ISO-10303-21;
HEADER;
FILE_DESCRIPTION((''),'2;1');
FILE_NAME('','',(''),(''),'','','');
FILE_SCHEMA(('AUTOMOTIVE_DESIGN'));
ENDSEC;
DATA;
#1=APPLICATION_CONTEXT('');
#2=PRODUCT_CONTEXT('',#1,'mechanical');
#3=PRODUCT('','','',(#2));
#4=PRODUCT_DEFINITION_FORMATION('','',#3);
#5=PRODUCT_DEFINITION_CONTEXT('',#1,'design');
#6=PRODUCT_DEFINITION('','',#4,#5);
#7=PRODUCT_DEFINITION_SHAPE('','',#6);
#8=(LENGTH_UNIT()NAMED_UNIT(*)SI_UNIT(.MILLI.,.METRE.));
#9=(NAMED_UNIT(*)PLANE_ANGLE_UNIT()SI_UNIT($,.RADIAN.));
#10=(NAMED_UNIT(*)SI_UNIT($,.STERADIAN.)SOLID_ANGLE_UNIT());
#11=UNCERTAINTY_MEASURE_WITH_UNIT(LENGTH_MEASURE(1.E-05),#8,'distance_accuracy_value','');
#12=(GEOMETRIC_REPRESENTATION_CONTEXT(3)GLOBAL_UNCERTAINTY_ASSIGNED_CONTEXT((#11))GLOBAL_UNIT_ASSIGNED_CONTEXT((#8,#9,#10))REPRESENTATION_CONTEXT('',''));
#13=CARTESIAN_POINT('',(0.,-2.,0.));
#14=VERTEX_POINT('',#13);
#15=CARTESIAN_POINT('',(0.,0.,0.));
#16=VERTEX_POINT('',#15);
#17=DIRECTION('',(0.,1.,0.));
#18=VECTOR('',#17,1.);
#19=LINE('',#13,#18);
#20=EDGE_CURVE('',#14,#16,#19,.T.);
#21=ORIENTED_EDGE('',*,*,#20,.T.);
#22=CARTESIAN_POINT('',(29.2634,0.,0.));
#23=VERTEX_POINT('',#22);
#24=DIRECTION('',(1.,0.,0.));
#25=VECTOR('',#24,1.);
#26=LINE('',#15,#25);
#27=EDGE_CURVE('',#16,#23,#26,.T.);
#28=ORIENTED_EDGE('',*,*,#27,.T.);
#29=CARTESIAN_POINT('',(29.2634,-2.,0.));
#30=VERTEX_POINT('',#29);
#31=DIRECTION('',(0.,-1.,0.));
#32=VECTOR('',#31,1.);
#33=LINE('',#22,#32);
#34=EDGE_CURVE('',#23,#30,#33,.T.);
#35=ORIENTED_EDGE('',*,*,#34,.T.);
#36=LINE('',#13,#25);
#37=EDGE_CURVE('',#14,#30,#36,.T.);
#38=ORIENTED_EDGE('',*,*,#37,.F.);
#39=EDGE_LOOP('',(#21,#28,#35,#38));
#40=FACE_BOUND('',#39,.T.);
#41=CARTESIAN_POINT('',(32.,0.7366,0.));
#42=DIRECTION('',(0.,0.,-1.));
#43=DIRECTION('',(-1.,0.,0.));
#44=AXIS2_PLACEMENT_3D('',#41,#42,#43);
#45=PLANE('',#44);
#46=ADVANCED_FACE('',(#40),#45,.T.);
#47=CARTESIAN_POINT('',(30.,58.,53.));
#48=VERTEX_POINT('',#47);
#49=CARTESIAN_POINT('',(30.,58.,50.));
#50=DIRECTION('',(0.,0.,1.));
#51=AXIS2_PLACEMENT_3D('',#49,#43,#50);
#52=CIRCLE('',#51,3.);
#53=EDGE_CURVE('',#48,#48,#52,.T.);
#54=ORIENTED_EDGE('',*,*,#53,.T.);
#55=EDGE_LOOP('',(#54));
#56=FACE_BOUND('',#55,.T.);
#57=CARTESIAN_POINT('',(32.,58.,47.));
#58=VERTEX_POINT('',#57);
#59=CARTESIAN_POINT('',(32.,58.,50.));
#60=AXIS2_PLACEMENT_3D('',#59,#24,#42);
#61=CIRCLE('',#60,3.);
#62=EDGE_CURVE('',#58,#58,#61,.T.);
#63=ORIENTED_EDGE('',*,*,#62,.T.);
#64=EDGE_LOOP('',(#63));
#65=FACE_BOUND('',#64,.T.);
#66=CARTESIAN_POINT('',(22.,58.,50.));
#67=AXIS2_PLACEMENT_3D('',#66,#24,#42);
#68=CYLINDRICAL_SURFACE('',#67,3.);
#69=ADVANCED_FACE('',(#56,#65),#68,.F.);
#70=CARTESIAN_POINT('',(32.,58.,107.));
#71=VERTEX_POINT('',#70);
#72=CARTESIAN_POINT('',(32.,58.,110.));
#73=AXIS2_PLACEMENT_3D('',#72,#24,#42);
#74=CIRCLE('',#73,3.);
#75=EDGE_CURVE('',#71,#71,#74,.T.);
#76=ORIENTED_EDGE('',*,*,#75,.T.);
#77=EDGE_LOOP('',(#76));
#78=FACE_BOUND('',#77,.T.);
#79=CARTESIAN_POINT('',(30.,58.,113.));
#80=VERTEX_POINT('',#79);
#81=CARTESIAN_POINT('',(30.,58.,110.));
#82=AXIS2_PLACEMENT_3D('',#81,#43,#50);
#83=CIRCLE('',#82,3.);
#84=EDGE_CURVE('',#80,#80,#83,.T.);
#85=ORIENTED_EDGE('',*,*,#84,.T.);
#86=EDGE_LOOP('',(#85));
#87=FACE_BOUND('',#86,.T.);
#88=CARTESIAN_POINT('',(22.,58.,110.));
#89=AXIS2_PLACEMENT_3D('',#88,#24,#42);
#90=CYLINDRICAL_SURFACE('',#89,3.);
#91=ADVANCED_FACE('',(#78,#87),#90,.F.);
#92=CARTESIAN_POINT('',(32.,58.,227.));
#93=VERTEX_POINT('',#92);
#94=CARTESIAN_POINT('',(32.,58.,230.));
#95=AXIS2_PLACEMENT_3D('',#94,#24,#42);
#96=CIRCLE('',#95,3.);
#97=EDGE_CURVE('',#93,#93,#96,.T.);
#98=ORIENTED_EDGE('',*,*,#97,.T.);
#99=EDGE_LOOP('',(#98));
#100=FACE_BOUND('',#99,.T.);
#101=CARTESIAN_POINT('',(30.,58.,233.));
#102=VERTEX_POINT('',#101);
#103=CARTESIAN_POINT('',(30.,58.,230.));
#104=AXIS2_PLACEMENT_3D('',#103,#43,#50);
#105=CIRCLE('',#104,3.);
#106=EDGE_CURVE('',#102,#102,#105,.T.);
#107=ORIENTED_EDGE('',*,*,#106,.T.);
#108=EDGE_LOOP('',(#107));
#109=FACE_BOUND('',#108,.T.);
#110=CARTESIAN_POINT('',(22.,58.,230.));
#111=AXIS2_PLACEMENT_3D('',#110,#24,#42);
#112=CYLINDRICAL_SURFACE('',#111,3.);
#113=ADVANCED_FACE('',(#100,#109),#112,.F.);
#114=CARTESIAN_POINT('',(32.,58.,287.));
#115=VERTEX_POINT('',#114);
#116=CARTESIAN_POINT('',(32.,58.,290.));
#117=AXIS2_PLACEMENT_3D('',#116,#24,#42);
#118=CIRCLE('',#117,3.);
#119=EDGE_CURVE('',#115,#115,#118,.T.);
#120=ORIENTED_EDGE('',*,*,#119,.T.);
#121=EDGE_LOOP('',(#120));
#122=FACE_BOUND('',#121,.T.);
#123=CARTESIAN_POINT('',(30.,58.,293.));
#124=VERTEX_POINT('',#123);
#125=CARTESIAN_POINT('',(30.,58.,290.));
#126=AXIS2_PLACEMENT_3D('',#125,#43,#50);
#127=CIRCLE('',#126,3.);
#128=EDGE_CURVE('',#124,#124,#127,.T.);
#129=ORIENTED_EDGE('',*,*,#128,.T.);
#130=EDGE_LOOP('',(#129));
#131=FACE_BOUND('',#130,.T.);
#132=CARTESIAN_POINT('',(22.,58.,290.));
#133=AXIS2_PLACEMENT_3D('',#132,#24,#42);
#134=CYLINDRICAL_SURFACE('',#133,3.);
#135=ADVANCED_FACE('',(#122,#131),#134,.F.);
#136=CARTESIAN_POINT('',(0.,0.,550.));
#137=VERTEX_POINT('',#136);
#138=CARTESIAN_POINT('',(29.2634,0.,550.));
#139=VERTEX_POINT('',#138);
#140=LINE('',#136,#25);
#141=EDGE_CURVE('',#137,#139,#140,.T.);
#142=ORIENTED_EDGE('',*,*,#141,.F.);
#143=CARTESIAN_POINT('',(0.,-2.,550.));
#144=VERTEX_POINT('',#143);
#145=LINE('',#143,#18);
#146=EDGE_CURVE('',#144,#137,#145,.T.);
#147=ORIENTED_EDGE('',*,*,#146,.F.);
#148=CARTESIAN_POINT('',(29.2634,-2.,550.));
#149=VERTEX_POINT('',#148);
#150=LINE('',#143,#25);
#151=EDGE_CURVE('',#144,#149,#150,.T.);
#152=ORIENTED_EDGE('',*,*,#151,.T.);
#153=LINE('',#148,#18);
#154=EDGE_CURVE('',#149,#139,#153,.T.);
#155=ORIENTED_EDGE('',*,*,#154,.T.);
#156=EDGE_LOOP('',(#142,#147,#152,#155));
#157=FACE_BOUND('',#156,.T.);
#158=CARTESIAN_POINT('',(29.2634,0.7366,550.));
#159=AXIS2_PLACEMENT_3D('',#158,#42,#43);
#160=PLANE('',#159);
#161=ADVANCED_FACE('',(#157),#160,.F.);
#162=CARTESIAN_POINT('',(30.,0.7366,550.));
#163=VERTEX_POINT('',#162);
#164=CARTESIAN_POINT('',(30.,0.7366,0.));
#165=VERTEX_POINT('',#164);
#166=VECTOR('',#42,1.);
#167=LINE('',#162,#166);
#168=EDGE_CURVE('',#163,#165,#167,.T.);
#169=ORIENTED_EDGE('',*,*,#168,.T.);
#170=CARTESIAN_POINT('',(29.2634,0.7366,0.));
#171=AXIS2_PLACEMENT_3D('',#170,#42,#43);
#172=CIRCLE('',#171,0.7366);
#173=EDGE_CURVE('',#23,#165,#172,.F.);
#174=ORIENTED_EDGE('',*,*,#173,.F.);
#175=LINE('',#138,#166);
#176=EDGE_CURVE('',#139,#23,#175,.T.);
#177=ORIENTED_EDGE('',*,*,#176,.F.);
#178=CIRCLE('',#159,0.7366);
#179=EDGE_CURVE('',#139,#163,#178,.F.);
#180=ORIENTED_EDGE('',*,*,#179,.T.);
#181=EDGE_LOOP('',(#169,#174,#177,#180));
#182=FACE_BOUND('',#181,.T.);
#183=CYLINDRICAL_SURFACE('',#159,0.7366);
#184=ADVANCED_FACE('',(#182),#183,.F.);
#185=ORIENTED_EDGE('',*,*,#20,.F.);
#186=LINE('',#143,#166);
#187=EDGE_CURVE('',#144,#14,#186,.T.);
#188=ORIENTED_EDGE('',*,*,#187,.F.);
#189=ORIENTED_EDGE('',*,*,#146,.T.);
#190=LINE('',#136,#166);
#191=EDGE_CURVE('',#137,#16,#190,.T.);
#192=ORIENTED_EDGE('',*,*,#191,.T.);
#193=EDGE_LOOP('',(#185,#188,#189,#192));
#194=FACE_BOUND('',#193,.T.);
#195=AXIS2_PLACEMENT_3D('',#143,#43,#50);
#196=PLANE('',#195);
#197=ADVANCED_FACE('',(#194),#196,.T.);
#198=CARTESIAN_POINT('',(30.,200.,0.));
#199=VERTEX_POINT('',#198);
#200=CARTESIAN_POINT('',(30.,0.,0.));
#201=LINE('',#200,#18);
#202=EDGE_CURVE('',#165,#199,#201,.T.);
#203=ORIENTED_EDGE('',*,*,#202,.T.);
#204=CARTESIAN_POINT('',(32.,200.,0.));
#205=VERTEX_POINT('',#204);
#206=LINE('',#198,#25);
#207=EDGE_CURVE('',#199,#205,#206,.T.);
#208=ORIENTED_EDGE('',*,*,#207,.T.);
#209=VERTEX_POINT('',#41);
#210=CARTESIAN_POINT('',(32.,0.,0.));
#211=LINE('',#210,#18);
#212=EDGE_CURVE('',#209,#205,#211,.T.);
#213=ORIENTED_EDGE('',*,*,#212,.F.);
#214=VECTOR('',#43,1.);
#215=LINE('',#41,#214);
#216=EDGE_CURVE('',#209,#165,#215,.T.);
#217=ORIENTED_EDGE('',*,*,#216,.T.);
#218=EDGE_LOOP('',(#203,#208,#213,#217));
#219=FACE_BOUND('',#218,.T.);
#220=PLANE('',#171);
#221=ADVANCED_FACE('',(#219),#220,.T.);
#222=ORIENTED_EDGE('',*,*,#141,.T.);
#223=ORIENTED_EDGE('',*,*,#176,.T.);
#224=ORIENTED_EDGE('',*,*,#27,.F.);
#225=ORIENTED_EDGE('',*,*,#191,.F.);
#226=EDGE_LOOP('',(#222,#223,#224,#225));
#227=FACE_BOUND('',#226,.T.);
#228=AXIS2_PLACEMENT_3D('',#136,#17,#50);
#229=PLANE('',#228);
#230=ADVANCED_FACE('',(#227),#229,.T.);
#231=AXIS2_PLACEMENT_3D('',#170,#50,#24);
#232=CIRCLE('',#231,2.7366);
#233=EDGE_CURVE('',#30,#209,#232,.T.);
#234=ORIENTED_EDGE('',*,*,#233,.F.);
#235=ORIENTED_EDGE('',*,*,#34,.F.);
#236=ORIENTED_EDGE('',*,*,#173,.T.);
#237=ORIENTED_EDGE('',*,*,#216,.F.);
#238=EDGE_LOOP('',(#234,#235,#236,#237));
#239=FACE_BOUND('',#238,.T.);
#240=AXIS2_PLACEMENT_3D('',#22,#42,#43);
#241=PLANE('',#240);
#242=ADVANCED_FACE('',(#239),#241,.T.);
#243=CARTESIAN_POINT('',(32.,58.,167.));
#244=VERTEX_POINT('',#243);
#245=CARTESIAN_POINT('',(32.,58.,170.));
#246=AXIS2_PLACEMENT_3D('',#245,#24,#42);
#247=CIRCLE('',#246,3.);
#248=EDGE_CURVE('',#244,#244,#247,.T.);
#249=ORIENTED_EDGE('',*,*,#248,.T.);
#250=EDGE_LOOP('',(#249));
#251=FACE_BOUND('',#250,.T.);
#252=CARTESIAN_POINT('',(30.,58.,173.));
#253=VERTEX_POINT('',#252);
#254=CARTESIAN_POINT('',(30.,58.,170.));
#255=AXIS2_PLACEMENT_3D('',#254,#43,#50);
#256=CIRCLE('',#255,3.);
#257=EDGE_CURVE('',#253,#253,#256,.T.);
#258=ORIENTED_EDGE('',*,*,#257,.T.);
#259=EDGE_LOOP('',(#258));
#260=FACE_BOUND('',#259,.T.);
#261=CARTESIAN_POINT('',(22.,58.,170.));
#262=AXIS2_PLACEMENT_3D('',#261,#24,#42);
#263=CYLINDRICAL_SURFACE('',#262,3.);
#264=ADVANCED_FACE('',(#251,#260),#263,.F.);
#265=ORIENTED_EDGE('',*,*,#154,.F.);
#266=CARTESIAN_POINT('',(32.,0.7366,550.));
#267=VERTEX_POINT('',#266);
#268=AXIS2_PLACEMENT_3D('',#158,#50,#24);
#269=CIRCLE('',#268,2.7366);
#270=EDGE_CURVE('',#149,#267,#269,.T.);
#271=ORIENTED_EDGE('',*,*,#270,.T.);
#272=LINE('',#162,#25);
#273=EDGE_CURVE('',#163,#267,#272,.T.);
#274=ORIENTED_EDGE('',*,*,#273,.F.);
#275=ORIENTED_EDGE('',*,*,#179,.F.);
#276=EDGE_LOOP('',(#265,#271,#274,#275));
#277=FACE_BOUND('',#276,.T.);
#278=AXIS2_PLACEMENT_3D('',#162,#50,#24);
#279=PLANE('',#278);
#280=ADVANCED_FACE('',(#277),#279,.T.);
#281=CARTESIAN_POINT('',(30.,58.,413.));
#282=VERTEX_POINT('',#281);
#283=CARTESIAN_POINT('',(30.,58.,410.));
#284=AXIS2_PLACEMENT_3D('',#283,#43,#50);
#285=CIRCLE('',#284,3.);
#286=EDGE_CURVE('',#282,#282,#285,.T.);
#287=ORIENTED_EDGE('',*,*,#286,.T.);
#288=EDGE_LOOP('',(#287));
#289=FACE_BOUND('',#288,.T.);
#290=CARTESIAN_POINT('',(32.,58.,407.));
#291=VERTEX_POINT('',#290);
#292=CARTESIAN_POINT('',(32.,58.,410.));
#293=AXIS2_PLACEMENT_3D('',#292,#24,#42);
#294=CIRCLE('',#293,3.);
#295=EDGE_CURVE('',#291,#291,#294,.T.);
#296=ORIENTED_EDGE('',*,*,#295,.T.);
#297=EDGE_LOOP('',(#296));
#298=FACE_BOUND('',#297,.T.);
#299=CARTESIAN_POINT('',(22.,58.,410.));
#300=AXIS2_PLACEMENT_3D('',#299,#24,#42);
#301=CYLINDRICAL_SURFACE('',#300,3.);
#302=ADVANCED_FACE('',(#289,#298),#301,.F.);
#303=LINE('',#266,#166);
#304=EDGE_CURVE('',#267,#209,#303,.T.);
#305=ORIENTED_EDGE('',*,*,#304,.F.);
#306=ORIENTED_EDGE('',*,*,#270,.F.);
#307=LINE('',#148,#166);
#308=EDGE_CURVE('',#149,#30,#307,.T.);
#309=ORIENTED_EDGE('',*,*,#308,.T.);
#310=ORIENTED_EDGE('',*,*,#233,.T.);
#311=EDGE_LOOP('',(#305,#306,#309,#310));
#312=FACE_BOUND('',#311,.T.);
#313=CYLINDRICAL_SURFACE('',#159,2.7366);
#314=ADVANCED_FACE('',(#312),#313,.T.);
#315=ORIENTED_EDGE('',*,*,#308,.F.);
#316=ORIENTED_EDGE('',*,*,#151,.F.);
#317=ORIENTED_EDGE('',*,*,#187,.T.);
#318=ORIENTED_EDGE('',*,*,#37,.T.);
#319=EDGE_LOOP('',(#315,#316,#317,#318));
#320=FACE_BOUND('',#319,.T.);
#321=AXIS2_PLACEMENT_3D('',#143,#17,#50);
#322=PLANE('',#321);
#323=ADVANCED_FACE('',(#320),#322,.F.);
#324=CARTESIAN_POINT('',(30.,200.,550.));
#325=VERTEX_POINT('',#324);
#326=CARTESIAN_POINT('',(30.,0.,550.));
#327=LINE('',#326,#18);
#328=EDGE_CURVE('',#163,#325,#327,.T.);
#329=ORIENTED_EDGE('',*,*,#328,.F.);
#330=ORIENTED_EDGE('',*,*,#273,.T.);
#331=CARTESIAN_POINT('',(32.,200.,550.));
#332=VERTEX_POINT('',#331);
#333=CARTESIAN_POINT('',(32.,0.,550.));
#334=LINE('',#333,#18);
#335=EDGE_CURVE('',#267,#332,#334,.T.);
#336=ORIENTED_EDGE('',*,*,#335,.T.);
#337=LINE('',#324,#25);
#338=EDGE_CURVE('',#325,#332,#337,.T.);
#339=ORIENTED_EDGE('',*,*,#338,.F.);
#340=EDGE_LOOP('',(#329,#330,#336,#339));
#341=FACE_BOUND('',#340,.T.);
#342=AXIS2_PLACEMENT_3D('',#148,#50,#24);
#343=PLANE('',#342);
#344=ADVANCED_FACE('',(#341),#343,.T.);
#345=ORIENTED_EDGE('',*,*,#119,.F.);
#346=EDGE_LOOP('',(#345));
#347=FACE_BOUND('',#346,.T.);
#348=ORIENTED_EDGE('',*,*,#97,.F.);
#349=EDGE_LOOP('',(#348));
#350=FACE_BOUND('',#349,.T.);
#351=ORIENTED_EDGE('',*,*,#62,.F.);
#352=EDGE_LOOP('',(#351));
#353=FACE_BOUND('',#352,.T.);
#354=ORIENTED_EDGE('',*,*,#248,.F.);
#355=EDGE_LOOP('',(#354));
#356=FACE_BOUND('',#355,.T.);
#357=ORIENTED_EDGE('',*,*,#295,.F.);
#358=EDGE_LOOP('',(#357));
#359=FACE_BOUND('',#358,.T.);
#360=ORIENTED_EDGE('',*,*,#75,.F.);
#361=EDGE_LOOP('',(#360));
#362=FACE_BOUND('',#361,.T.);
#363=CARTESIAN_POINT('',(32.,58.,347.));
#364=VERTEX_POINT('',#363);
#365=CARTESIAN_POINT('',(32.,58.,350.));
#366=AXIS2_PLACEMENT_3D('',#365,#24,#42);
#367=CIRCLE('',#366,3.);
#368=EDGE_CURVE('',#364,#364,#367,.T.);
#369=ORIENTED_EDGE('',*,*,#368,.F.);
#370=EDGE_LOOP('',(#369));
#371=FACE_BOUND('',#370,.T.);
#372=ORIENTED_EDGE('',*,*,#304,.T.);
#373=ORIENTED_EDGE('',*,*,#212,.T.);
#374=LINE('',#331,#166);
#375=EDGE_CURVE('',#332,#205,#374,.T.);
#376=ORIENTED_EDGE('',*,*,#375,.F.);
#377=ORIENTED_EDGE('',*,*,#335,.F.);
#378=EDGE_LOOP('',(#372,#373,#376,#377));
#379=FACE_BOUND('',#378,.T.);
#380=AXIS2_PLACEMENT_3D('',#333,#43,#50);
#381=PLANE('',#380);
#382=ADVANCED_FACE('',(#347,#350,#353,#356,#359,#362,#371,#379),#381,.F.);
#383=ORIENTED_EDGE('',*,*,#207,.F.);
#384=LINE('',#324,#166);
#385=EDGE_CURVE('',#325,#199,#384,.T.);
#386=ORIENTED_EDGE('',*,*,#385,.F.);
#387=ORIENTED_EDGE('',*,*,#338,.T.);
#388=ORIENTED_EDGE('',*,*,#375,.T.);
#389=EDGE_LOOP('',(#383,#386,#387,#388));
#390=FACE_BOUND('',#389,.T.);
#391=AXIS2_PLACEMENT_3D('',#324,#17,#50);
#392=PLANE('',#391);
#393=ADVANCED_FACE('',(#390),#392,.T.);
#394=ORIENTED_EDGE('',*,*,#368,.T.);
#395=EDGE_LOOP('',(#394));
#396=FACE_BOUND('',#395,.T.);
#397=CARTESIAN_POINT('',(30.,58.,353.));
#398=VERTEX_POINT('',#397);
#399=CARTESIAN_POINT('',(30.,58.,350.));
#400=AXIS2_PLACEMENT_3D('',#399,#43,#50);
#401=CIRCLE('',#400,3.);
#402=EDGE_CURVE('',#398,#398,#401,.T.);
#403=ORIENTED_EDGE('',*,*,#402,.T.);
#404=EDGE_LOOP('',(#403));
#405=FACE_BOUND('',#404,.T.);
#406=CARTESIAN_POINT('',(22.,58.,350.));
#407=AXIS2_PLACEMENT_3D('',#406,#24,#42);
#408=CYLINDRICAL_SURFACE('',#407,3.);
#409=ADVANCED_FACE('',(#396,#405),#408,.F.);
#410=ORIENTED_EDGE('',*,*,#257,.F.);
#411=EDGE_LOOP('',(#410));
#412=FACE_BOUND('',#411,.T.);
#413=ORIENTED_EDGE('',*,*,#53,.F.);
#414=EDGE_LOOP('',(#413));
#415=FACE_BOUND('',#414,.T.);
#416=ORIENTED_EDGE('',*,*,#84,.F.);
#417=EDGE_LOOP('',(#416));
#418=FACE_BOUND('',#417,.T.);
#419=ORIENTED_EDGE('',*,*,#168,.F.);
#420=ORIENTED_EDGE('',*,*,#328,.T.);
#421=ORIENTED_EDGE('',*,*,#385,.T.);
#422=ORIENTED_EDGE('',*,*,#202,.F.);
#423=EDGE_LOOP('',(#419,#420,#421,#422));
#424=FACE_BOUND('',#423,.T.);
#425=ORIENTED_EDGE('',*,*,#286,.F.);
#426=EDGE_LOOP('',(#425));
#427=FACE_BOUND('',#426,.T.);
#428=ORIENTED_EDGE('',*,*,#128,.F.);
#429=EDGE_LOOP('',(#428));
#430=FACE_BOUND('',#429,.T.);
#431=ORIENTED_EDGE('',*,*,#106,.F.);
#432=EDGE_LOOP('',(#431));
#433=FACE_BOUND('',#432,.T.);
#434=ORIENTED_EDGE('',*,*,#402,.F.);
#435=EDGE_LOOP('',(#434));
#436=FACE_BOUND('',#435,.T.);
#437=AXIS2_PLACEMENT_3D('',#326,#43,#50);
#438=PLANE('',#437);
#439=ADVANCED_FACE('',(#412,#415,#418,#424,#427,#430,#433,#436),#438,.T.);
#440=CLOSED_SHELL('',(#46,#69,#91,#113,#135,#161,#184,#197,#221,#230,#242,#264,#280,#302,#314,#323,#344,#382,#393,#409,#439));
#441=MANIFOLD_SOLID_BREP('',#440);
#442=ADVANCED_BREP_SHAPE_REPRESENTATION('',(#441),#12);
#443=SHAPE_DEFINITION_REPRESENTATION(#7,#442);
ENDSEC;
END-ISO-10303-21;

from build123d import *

# Parameters (mm, degrees)
BASE_FLANGE1_DEPTH = 550
SKETCH10_R         = 3
CUT_EXTRUDE2_DEPTH = 10


# Sheet-metal steps are written as plain solids
with BuildPart() as part:
    # Sketch1 → Base-Flange1 (new body)
    with BuildSketch(Plane.XY):
        with BuildLine():
            Line((0, 0), (29.2634, 0))
            ThreePointArc((29.2634, 0), (29.784254855, 0.215745145), (30, 0.7366))
            Line((30, 0.7366), (30, 200))
            Line((30, 200), (32, 200))
            Line((32, 200), (32, 0.7366))
            ThreePointArc((32, 0.7366), (31.198468417, -1.198468417), (29.2634, -2))
            Line((29.2634, -2), (0, -2))
            Line((0, -2), (0, 0))
        make_face()
    extrude(amount=BASE_FLANGE1_DEPTH)

    # Sketch10 → Cut-Extrude2 (cut)
    with BuildSketch(Plane(origin=(32, 0, 0), x_dir=(0, 0, -1), z_dir=(1, 0, 0))):
        with Locations((-50, 58)):
            Circle(SKETCH10_R)
        with Locations((-110, 58)):
            Circle(SKETCH10_R)
        with Locations((-170, 58)):
            Circle(SKETCH10_R)
        with Locations((-230, 58)):
            Circle(SKETCH10_R)
        with Locations((-290, 58)):
            Circle(SKETCH10_R)
        with Locations((-350, 58)):
            Circle(SKETCH10_R)
        with Locations((-410, 58)):
            Circle(SKETCH10_R)
    extrude(amount=-CUT_EXTRUDE2_DEPTH, mode=Mode.SUBTRACT)


solid = part.part
